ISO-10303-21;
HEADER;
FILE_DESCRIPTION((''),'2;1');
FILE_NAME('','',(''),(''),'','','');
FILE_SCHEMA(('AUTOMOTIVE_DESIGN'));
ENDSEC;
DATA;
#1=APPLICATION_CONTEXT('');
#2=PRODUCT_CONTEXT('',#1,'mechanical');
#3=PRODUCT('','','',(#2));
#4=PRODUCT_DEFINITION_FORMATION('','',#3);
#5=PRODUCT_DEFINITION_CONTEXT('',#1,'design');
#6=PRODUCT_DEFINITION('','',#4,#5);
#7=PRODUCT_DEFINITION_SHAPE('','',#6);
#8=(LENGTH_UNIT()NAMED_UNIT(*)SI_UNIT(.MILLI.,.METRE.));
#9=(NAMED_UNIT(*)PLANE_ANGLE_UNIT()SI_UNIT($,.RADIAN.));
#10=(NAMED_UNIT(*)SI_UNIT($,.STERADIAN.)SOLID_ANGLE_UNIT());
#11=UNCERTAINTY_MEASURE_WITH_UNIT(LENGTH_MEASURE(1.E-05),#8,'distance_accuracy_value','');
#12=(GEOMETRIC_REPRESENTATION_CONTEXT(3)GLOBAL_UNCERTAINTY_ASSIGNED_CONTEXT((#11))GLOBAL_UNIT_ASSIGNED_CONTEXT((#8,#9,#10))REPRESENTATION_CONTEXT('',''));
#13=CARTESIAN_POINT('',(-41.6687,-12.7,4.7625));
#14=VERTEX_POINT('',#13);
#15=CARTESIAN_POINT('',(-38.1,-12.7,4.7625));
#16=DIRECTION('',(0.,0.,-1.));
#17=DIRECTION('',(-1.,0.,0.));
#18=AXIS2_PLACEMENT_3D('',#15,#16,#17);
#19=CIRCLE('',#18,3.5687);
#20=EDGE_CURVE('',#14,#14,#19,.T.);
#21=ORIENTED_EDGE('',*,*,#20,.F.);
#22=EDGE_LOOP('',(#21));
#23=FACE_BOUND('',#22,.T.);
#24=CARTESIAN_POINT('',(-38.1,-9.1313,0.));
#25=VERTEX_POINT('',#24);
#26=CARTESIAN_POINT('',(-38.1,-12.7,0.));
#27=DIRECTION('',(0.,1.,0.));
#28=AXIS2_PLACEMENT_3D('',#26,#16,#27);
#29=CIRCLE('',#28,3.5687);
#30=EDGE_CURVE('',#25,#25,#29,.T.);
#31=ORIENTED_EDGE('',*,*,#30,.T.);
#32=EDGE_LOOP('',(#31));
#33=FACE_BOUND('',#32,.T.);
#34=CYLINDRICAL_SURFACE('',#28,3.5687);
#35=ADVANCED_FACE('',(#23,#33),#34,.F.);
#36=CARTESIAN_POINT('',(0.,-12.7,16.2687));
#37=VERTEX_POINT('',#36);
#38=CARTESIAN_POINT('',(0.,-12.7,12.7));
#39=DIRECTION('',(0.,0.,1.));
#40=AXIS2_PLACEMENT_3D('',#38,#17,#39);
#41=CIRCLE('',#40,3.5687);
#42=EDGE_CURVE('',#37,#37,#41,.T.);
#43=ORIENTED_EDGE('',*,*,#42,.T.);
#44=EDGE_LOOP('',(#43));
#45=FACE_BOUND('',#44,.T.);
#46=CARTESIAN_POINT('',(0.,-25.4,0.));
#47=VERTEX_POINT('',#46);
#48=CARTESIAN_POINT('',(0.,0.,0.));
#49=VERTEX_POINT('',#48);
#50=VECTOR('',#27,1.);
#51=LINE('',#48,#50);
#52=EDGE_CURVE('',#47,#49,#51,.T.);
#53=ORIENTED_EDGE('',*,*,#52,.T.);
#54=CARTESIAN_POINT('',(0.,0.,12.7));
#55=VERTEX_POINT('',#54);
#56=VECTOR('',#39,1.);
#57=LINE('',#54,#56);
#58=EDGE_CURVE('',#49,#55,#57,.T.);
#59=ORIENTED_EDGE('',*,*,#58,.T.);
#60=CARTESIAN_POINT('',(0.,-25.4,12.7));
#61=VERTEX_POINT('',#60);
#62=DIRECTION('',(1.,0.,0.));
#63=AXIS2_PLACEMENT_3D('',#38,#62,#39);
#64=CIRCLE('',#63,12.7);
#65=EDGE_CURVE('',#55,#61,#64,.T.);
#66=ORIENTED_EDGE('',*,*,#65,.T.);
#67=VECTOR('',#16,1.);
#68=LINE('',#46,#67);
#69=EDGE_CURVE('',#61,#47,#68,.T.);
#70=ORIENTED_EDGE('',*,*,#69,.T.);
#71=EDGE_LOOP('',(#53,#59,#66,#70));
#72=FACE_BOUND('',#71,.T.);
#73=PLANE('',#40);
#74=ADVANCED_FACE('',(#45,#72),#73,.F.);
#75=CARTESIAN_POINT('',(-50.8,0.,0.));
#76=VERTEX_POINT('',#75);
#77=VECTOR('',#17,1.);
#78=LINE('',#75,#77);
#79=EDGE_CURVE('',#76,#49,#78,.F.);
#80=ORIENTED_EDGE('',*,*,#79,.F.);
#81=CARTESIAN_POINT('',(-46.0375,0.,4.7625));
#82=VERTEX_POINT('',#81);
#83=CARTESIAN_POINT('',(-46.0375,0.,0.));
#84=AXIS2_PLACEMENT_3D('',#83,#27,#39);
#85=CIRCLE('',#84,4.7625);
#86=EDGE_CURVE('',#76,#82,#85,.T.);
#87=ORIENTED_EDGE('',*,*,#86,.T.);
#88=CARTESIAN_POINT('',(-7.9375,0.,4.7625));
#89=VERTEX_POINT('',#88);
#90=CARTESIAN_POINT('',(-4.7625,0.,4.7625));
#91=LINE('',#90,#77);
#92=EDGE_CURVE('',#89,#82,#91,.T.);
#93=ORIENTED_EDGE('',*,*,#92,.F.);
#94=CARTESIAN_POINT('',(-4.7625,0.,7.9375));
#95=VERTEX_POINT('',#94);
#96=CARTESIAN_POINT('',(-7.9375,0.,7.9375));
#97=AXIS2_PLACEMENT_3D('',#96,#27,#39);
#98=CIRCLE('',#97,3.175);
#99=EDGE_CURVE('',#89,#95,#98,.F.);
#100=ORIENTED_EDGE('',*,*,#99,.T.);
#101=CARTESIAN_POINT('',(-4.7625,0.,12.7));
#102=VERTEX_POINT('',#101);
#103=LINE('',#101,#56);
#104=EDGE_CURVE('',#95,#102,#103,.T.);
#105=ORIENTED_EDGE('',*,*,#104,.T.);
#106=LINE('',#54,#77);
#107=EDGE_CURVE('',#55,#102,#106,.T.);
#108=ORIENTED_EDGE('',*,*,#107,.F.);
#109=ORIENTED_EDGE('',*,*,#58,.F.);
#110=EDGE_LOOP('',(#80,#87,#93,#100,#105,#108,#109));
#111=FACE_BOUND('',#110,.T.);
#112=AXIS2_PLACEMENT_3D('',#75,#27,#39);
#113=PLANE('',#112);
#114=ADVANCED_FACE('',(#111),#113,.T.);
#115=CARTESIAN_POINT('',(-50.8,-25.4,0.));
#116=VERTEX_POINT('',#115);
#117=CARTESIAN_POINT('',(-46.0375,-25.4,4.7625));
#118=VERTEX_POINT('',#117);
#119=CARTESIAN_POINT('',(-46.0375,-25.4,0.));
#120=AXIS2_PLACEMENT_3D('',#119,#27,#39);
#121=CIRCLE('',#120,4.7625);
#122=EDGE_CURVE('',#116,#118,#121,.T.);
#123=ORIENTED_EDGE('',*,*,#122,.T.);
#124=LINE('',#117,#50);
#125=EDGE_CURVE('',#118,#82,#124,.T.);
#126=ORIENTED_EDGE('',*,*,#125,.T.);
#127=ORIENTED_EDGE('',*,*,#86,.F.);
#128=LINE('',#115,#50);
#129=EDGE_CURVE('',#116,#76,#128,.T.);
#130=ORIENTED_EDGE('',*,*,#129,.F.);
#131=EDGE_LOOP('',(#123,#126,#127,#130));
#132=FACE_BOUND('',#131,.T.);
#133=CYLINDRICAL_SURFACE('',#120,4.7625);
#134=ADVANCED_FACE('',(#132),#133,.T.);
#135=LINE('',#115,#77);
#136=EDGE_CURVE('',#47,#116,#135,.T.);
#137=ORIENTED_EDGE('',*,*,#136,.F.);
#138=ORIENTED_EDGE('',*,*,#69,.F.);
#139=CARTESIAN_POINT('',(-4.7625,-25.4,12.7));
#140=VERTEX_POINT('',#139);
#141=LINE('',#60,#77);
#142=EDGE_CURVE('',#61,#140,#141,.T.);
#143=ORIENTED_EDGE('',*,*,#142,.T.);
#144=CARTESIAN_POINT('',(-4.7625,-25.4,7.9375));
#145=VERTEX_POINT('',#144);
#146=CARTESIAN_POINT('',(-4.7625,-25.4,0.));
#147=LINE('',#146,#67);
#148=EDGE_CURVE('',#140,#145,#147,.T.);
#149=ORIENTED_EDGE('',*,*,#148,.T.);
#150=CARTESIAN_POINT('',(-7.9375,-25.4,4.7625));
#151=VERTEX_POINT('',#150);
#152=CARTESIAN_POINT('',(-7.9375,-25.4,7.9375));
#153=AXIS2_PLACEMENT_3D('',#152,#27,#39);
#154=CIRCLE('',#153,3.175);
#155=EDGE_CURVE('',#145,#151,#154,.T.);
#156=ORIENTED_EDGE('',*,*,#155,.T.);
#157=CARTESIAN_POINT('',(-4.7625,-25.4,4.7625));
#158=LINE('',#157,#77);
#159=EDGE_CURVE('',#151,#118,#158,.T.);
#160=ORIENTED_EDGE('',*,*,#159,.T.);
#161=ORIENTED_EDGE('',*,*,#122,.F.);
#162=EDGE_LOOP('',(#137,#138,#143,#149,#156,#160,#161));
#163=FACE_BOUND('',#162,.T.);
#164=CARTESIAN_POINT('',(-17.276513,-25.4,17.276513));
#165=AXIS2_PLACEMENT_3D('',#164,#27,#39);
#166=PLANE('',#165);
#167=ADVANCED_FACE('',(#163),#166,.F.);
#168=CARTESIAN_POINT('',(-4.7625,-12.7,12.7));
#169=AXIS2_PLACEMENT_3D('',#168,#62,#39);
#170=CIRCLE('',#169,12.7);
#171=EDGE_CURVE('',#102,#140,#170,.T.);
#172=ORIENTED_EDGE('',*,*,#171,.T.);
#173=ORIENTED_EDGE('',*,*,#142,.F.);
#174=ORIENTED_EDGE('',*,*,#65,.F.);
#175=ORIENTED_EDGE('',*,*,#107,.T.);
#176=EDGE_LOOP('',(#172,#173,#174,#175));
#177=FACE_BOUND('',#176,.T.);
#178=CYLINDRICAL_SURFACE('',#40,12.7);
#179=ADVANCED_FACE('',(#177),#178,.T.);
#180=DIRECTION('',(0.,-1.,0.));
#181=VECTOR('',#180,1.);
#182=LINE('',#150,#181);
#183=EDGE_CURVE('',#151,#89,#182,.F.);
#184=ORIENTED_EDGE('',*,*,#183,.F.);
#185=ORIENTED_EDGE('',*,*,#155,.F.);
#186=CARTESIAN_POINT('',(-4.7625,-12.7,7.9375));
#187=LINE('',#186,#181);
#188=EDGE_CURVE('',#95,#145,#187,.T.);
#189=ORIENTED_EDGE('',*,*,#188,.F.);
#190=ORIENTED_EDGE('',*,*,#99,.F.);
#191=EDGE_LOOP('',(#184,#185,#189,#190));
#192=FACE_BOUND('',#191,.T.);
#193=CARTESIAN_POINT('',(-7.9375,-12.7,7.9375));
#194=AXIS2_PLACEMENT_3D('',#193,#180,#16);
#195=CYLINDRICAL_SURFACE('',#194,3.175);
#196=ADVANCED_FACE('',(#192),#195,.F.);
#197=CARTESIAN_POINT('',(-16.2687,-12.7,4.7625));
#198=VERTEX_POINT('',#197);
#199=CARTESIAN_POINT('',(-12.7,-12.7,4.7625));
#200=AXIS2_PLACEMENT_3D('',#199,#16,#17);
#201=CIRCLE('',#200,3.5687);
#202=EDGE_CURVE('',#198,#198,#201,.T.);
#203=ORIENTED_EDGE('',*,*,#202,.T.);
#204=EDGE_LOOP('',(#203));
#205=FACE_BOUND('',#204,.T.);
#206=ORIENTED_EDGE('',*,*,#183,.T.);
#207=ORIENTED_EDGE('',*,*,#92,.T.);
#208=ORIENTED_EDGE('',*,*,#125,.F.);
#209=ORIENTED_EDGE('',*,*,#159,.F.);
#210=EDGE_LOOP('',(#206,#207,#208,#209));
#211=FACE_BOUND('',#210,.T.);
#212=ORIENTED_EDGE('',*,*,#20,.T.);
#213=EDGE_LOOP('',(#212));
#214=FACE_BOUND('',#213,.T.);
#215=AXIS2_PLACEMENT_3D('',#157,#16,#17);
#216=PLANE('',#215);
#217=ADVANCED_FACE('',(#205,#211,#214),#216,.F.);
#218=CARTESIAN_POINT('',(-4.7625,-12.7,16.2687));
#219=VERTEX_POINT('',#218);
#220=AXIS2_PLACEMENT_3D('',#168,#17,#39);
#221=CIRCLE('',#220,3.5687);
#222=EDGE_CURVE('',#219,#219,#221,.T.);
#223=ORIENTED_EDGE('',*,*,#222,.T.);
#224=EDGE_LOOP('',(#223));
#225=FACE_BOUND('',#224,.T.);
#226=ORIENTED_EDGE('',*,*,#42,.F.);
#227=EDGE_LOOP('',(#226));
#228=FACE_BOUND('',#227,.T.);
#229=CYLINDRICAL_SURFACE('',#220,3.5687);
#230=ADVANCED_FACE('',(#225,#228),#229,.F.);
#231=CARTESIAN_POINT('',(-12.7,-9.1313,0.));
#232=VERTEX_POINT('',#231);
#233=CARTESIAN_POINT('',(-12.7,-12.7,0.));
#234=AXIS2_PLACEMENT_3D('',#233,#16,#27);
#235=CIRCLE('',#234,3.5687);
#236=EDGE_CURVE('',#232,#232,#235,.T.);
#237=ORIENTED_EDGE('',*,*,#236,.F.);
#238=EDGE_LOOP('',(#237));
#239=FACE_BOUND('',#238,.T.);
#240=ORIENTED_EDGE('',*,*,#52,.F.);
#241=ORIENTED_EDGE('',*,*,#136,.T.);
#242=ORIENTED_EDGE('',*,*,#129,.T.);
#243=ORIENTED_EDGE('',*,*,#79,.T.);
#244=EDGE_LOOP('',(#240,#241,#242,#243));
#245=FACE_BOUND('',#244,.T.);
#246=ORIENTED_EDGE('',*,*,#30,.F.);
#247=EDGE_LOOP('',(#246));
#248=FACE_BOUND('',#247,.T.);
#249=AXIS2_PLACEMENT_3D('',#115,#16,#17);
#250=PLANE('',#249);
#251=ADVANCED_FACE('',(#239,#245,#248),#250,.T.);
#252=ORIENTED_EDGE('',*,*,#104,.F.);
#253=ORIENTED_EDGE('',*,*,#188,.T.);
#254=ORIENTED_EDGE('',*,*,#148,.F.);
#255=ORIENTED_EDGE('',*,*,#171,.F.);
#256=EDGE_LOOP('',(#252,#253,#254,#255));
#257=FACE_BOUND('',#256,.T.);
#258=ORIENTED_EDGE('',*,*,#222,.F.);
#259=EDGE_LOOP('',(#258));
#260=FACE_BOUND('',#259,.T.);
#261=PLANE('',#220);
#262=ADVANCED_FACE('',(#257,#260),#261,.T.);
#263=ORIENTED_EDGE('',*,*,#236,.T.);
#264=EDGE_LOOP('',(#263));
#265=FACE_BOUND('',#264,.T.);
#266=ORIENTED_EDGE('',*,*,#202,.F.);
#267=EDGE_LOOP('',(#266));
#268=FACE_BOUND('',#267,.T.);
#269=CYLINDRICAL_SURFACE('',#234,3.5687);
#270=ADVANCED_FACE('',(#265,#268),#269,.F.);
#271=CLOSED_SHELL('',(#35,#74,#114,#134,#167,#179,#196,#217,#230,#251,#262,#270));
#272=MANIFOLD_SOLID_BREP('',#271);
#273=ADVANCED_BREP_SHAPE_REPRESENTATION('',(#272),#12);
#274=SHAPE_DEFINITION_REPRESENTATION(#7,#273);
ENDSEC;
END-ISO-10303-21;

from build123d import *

# Parameters (mm, degrees)
BOSS_EXTRUDE1_START        = -25.4
BOSS_EXTRUDE1_DEPTH        = 25.4
BOSS_EXTRUDE2_DEPTH        = 4.7625
M6_5_CLEARANCE_HOLE1_D     = 7.1374
M6_5_CLEARANCE_HOLE1_DEPTH = 25.4
M6_5_CLEARANCE_HOLE2_D     = 7.1374
FILLET1_R                  = 3.175


with BuildPart() as part:
    # Boss-Extrude1: read off the stored shape, not the designer's step
    # Boss-Extrude1 outline → Boss-Extrude1 (new body)
    with BuildSketch(Plane(origin=(0, 0, 0), x_dir=(1, 0, 0), z_dir=(0, 1, 0)).offset(BOSS_EXTRUDE1_START)):
        with BuildLine():
            Line((-4.7625, -4.7625), (-4.7625, 0))
            Line((-4.7625, 0), (-50.8, 0))
            ThreePointArc((-50.8, 0), (-49.405096045, -3.367596045), (-46.0375, -4.7625))
            Line((-46.0375, -4.7625), (-4.7625, -4.7625))
        make_face()
    extrude(amount=BOSS_EXTRUDE1_DEPTH)

    # Sketch2 → Boss-Extrude2 (add)
    with BuildSketch(Plane(origin=(-4.7625, 0, 0), x_dir=(0, 0, -1), z_dir=(1, 0, 0))):
        with BuildLine():
            Line((0, 0), (0, -25.4))
            Line((0, -25.4), (-12.7, -25.4))
            ThreePointArc((-12.7, -25.4), (-25.4, -12.7), (-12.7, 0))
            Line((-12.7, 0), (0, 0))
        make_face()
    extrude(amount=BOSS_EXTRUDE2_DEPTH)

    # M6.5 Clearance Hole1
    with Locations(Plane(origin=(0, 0, 0), x_dir=(-1, 0, 0), z_dir=(0, 0, -1))):
        with Locations((38.1, -12.7), (12.7, -12.7)):
            Hole(M6_5_CLEARANCE_HOLE1_D / 2, depth=M6_5_CLEARANCE_HOLE1_DEPTH)

    # M6.5 Clearance Hole2 (through all)
    with Locations(Plane.ZY.offset(4.7625)):
        with Locations((12.7, -12.7)):
            Hole(M6_5_CLEARANCE_HOLE2_D / 2)

    # Fillet1
    fillet1_edges = [part.edges().sort_by_distance(p)[0] for p in [
        (-4.7625, -12.7, 4.7625),
    ]]
    fillet(fillet1_edges, radius=FILLET1_R)


solid = part.part
